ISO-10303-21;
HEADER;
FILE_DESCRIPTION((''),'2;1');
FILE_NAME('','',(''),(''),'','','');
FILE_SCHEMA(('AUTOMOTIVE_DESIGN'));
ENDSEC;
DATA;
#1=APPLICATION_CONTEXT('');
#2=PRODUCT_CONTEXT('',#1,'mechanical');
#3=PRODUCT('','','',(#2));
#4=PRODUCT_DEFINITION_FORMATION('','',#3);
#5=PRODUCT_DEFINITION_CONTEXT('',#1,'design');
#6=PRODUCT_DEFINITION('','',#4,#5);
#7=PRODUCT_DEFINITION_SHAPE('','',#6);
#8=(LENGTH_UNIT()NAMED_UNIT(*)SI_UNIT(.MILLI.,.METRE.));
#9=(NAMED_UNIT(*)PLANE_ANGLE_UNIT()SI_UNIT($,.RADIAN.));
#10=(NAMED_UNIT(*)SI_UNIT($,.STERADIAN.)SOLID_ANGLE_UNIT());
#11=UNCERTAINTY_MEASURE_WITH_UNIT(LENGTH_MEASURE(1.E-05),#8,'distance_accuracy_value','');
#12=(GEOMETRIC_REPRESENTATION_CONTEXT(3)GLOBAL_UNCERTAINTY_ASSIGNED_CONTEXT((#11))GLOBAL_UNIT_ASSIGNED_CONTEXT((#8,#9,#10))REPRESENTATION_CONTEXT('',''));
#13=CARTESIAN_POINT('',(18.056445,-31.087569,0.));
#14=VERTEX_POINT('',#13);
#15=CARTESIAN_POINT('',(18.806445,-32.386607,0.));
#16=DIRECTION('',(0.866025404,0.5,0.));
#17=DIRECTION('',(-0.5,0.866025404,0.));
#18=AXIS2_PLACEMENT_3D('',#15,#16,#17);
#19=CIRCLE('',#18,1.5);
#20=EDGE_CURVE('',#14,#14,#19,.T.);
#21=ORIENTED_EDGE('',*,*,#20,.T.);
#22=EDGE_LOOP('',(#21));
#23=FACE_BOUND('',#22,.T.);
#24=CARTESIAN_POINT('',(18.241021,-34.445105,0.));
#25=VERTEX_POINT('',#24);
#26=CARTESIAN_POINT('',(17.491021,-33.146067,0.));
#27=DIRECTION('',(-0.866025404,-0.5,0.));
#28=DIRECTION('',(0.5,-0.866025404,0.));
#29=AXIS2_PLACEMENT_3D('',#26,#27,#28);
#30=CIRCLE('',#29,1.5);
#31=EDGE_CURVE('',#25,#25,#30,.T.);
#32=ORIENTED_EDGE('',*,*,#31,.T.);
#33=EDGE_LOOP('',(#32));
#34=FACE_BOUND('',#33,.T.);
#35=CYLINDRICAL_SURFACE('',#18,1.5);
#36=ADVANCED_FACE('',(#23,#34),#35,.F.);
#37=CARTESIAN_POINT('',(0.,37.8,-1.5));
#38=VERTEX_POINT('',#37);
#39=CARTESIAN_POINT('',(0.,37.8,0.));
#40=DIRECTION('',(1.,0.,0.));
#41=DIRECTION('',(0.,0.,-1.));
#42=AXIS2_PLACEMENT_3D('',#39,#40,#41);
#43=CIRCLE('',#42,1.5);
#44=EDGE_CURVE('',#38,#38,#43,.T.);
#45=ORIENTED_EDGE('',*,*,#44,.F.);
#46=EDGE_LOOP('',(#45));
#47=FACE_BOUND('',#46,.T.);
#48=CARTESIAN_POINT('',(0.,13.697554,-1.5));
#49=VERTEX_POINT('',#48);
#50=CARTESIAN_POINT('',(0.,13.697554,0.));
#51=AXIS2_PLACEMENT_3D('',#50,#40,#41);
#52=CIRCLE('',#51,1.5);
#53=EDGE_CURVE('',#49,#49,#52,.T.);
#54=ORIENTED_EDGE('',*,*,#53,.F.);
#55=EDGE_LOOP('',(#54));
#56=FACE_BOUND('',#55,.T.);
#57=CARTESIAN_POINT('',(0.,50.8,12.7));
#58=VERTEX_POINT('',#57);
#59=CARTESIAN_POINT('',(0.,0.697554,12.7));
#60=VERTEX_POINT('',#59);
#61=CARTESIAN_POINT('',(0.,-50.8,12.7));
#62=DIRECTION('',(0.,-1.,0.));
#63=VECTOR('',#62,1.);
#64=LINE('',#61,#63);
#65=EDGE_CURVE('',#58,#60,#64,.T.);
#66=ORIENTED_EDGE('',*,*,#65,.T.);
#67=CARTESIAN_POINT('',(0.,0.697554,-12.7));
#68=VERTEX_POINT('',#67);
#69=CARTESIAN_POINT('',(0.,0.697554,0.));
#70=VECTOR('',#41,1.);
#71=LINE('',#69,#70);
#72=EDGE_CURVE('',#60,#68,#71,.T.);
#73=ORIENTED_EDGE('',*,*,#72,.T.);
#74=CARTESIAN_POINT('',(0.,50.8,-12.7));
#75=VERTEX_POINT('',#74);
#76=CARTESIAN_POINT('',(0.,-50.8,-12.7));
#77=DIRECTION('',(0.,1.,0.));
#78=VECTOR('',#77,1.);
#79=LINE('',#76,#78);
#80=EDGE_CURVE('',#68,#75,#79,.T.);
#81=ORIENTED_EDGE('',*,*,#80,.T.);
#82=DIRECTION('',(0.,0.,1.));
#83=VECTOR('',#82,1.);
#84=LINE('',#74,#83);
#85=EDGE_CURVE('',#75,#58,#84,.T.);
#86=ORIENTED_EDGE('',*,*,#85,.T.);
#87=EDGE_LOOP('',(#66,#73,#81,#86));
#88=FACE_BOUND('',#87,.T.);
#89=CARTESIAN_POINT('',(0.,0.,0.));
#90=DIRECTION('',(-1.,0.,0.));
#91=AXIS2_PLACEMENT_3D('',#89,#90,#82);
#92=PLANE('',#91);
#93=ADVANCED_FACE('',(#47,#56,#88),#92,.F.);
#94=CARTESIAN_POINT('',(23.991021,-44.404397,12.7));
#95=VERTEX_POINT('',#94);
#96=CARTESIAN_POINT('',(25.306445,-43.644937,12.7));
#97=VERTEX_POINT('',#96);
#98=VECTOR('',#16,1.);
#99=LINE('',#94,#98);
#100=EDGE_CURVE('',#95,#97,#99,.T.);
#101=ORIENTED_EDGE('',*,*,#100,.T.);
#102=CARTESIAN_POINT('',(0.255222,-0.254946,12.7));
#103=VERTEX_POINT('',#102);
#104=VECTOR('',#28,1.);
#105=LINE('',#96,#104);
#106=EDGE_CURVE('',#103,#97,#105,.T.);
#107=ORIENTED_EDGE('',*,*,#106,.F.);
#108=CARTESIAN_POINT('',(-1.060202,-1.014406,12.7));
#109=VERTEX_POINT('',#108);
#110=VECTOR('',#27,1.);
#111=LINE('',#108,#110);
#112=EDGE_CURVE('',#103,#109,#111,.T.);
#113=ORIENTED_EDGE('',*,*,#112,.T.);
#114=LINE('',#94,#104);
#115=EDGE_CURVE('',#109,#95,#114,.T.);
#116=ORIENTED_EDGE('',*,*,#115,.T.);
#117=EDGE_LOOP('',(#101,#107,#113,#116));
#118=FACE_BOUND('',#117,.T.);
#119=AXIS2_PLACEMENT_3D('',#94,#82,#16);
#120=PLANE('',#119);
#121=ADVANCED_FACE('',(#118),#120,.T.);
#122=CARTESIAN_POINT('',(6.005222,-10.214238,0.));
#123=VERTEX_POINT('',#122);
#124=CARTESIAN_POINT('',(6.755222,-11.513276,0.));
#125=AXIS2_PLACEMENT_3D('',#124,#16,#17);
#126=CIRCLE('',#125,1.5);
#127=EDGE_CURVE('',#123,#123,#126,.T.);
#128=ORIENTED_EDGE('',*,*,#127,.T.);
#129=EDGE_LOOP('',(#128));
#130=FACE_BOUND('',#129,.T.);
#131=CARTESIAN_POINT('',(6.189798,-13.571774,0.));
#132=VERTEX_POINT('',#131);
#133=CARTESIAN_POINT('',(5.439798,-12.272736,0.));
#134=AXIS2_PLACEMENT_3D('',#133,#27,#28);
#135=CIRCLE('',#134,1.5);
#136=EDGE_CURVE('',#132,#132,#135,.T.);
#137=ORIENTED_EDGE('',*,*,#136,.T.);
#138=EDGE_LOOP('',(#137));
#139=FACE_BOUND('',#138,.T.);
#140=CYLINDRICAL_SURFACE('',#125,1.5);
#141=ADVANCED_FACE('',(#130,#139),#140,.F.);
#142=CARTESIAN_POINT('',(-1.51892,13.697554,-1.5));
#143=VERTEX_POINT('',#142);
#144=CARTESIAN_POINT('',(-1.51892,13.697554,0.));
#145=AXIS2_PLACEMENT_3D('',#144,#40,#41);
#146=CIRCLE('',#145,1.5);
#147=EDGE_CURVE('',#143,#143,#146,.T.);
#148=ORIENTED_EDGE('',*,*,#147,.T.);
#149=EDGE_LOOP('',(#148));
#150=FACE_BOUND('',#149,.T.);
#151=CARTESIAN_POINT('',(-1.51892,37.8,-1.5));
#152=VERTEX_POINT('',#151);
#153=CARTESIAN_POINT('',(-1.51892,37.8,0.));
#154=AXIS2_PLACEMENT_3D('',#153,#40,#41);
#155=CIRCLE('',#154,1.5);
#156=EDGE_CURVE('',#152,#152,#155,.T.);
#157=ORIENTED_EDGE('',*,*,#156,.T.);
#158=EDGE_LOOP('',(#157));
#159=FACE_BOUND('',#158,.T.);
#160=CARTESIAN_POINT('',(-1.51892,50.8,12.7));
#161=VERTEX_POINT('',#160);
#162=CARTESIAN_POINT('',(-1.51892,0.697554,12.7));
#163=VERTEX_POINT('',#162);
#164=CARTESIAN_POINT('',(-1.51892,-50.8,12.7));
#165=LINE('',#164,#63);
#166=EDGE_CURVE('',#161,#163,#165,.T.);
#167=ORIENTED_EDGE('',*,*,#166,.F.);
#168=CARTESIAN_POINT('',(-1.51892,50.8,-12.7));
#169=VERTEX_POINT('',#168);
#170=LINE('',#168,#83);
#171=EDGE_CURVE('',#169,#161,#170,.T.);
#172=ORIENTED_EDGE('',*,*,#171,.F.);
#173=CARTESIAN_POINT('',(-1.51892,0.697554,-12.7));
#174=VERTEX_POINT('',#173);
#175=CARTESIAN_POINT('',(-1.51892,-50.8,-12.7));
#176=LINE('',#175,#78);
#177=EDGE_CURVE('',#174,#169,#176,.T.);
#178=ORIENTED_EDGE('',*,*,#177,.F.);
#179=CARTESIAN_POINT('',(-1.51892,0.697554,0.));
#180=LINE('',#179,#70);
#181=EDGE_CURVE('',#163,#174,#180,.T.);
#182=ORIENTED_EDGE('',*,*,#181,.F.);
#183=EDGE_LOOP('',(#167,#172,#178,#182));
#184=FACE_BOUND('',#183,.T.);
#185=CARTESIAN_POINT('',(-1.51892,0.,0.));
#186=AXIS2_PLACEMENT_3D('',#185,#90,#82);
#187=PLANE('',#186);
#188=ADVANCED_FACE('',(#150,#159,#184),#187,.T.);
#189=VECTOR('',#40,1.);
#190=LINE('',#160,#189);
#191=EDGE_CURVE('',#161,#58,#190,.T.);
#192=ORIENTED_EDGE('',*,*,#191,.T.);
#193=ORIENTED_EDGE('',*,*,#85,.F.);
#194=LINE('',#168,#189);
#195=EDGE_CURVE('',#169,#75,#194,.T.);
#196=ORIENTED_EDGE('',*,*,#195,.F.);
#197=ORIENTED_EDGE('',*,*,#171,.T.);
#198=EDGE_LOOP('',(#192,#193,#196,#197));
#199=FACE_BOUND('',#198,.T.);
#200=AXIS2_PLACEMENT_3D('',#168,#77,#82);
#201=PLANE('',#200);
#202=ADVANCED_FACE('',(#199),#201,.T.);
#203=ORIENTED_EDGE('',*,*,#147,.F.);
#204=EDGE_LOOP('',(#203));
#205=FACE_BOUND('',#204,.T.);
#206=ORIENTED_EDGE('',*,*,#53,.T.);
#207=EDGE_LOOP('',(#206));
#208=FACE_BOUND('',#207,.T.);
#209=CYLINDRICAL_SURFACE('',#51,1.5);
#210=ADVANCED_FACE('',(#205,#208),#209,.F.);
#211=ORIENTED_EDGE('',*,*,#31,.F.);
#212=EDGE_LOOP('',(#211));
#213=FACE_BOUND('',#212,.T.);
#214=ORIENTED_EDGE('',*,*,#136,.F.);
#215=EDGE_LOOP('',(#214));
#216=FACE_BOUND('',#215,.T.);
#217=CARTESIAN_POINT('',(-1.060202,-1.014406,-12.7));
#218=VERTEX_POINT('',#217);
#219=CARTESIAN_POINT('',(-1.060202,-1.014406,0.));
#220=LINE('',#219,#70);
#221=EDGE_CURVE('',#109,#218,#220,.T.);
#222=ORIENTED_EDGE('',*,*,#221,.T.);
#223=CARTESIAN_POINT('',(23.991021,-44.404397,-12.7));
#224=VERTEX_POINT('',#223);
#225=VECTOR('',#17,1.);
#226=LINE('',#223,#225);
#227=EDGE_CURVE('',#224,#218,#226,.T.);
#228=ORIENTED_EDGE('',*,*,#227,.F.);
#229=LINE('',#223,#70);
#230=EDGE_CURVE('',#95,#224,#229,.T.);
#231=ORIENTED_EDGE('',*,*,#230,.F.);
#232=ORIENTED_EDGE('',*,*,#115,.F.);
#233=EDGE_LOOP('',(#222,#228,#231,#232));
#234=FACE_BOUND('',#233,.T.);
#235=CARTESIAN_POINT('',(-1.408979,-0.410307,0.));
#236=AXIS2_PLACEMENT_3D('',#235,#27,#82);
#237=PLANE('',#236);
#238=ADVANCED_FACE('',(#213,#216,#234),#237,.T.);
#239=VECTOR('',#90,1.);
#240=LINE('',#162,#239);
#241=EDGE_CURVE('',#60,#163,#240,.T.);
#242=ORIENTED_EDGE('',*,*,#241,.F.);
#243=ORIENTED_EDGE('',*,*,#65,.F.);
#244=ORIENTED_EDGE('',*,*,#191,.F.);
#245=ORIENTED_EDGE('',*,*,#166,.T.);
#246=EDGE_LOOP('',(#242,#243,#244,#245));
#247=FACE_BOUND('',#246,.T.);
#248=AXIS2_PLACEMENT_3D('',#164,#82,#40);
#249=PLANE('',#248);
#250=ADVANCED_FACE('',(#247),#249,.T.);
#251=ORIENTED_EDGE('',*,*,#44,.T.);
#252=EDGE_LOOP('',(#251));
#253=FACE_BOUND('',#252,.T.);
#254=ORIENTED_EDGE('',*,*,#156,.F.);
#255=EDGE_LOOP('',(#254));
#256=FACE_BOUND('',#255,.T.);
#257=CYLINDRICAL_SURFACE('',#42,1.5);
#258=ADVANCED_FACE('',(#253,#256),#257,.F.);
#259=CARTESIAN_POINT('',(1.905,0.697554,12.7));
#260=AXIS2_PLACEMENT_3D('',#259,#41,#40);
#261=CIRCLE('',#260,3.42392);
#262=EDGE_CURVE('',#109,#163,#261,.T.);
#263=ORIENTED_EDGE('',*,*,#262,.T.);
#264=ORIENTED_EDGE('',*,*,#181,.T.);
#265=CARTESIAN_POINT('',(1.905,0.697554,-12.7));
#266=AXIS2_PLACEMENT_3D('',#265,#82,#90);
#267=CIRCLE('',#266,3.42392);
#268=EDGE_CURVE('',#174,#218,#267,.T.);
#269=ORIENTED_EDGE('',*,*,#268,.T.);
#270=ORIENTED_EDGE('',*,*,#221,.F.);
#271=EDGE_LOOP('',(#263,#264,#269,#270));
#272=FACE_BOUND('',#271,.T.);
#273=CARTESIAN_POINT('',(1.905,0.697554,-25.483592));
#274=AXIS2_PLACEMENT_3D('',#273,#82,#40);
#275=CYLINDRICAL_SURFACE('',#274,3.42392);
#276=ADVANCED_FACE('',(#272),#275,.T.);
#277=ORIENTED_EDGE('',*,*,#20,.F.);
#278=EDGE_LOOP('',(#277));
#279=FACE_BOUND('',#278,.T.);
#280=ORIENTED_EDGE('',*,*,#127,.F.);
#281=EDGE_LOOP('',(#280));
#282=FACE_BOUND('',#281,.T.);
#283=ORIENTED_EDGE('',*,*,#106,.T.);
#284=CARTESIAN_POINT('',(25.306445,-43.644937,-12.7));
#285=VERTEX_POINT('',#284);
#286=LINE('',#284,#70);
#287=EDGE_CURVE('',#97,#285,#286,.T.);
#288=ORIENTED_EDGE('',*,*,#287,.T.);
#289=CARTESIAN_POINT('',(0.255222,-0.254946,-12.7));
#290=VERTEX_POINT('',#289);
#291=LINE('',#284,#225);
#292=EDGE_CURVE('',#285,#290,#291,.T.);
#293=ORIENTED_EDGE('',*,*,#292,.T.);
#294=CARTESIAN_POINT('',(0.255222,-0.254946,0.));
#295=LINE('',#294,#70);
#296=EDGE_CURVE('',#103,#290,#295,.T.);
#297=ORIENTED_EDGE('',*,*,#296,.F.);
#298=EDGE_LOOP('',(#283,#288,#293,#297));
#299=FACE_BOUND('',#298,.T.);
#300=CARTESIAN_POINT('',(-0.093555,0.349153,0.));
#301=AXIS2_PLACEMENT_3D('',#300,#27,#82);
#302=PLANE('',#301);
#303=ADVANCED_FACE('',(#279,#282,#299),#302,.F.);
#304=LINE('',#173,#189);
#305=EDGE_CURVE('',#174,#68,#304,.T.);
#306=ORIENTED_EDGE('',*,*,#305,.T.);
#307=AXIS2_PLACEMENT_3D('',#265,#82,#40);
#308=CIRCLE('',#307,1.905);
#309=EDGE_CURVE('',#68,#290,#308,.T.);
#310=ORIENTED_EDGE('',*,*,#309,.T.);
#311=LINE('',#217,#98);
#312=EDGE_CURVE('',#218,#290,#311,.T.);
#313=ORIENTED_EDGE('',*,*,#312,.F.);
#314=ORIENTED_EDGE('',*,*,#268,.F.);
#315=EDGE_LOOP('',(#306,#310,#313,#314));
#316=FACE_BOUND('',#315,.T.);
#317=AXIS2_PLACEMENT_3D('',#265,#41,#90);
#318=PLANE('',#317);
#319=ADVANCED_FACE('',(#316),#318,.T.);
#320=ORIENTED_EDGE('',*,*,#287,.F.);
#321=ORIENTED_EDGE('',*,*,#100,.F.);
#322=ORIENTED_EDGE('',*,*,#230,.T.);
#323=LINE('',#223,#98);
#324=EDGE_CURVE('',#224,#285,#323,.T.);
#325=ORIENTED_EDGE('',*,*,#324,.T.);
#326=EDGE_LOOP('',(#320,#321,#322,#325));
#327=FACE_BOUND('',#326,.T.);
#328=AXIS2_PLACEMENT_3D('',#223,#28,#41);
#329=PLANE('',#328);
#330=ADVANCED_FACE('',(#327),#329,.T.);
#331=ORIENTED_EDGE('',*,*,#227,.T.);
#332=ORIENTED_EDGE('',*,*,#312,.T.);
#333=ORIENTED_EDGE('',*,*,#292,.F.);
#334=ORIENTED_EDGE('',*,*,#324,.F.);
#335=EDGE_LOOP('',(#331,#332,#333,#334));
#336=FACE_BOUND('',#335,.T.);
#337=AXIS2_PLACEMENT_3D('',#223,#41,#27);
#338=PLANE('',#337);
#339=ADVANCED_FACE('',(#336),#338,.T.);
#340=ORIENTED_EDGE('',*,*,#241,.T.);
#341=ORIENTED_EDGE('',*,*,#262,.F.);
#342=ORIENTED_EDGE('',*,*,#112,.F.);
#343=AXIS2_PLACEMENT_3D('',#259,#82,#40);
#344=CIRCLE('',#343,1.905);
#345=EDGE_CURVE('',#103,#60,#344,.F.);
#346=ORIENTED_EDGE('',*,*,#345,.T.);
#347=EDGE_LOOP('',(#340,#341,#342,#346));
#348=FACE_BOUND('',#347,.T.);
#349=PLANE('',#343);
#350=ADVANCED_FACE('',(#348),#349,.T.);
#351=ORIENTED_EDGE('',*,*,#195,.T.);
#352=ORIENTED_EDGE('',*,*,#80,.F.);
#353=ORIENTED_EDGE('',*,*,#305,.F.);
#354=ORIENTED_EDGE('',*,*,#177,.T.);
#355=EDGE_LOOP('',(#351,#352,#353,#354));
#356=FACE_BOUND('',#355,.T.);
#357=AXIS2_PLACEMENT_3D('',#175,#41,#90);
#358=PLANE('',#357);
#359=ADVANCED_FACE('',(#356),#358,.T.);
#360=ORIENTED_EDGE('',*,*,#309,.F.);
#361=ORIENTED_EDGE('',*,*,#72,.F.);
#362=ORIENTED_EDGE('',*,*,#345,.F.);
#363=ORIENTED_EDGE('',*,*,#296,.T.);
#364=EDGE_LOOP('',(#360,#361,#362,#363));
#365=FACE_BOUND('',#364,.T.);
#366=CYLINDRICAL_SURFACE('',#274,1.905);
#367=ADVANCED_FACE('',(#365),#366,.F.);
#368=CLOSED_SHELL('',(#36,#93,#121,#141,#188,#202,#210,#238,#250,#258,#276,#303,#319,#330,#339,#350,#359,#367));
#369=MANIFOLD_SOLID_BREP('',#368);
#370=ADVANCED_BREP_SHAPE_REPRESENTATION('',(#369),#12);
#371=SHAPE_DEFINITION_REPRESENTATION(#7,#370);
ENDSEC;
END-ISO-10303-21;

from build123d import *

# Parameters (mm, degrees)
SKETCH1_W                = 101.6
SKETCH1_H                = 25.4
BASE_FLANGE1_DEPTH       = 1.51892
SKETCHED_START           = -12.7
SKETCHED_BEND1_DEPTH     = 25.4
SKETCHED_BEND1_2_DEPTH   = 25.4
F_3_0_3_DIAMETER_HOLE1_D = 3
F_3_0_3_DIAMETER_HOLE2_D = 3


# Read off the part's stored shape, not the designer's step: Sketched Bend1
# Sheet-metal steps are written as plain solids
with BuildPart() as part:
    # Sketch1 → Base-Flange1 (new body)
    with BuildSketch(Plane.YZ):
        Rectangle(SKETCH1_W, SKETCH1_H)
    extrude(amount=-BASE_FLANGE1_DEPTH)

    # Sketched Bend1 outline → Sketched Bend1 (cut)
    with BuildSketch(Plane.XY.offset(SKETCHED_START)):
        with BuildLine():
            Line((0, -2.850729215), (-1.060201701, -1.014406003))
            ThreePointArc((-1.060201701, -1.014406003), (-1.402252755, -0.188621708), (-1.51892, 0.697553997))
            Line((-1.51892, 0.697553997), (-1.51892, -50.8))
            Line((-1.51892, -50.8), (0, -50.8))
            Line((0, -50.8), (0, -2.850729215))
        make_face()
    extrude(amount=SKETCHED_BEND1_DEPTH, mode=Mode.SUBTRACT)

    # Sketched Bend1 2 outline → Sketched Bend1 2 (add)
    with BuildSketch(Plane.XY.offset(SKETCHED_START)):
        with BuildLine():
            Line((0, 0.697553997), (0, -2.850729215))
            Line((0, -2.850729215), (23.991021301, -44.404397034))
            Line((23.991021301, -44.404397034), (25.306444607, -43.644937034))
            Line((25.306444607, -43.644937034), (0.255221606, -0.254946003))
            ThreePointArc((0.255221606, -0.254946003), (0.064911301, 0.204503716), (0, 0.697553997))
        make_face()
    extrude(amount=SKETCHED_BEND1_2_DEPTH)

    # Ø3.0 (3) Diameter Hole1 (through all)
    with Locations(Plane(origin=(0.081021347, 0.046777696, 0), x_dir=(-0.500000000000001, 0.866025403784438, 0), z_dir=(0.866025403784438, 0.500000000000001, 0))):
        with Locations((-37.450846521, 0), (-13.348400518, 0)):
            Hole(F_3_0_3_DIAMETER_HOLE1_D / 2)

    # Ø3.0 (3) Diameter Hole2 (through all)
    with Locations(Plane.YZ):
        with Locations((13.697553997, 0), (37.8, 0)):
            Hole(F_3_0_3_DIAMETER_HOLE2_D / 2)


solid = part.part
